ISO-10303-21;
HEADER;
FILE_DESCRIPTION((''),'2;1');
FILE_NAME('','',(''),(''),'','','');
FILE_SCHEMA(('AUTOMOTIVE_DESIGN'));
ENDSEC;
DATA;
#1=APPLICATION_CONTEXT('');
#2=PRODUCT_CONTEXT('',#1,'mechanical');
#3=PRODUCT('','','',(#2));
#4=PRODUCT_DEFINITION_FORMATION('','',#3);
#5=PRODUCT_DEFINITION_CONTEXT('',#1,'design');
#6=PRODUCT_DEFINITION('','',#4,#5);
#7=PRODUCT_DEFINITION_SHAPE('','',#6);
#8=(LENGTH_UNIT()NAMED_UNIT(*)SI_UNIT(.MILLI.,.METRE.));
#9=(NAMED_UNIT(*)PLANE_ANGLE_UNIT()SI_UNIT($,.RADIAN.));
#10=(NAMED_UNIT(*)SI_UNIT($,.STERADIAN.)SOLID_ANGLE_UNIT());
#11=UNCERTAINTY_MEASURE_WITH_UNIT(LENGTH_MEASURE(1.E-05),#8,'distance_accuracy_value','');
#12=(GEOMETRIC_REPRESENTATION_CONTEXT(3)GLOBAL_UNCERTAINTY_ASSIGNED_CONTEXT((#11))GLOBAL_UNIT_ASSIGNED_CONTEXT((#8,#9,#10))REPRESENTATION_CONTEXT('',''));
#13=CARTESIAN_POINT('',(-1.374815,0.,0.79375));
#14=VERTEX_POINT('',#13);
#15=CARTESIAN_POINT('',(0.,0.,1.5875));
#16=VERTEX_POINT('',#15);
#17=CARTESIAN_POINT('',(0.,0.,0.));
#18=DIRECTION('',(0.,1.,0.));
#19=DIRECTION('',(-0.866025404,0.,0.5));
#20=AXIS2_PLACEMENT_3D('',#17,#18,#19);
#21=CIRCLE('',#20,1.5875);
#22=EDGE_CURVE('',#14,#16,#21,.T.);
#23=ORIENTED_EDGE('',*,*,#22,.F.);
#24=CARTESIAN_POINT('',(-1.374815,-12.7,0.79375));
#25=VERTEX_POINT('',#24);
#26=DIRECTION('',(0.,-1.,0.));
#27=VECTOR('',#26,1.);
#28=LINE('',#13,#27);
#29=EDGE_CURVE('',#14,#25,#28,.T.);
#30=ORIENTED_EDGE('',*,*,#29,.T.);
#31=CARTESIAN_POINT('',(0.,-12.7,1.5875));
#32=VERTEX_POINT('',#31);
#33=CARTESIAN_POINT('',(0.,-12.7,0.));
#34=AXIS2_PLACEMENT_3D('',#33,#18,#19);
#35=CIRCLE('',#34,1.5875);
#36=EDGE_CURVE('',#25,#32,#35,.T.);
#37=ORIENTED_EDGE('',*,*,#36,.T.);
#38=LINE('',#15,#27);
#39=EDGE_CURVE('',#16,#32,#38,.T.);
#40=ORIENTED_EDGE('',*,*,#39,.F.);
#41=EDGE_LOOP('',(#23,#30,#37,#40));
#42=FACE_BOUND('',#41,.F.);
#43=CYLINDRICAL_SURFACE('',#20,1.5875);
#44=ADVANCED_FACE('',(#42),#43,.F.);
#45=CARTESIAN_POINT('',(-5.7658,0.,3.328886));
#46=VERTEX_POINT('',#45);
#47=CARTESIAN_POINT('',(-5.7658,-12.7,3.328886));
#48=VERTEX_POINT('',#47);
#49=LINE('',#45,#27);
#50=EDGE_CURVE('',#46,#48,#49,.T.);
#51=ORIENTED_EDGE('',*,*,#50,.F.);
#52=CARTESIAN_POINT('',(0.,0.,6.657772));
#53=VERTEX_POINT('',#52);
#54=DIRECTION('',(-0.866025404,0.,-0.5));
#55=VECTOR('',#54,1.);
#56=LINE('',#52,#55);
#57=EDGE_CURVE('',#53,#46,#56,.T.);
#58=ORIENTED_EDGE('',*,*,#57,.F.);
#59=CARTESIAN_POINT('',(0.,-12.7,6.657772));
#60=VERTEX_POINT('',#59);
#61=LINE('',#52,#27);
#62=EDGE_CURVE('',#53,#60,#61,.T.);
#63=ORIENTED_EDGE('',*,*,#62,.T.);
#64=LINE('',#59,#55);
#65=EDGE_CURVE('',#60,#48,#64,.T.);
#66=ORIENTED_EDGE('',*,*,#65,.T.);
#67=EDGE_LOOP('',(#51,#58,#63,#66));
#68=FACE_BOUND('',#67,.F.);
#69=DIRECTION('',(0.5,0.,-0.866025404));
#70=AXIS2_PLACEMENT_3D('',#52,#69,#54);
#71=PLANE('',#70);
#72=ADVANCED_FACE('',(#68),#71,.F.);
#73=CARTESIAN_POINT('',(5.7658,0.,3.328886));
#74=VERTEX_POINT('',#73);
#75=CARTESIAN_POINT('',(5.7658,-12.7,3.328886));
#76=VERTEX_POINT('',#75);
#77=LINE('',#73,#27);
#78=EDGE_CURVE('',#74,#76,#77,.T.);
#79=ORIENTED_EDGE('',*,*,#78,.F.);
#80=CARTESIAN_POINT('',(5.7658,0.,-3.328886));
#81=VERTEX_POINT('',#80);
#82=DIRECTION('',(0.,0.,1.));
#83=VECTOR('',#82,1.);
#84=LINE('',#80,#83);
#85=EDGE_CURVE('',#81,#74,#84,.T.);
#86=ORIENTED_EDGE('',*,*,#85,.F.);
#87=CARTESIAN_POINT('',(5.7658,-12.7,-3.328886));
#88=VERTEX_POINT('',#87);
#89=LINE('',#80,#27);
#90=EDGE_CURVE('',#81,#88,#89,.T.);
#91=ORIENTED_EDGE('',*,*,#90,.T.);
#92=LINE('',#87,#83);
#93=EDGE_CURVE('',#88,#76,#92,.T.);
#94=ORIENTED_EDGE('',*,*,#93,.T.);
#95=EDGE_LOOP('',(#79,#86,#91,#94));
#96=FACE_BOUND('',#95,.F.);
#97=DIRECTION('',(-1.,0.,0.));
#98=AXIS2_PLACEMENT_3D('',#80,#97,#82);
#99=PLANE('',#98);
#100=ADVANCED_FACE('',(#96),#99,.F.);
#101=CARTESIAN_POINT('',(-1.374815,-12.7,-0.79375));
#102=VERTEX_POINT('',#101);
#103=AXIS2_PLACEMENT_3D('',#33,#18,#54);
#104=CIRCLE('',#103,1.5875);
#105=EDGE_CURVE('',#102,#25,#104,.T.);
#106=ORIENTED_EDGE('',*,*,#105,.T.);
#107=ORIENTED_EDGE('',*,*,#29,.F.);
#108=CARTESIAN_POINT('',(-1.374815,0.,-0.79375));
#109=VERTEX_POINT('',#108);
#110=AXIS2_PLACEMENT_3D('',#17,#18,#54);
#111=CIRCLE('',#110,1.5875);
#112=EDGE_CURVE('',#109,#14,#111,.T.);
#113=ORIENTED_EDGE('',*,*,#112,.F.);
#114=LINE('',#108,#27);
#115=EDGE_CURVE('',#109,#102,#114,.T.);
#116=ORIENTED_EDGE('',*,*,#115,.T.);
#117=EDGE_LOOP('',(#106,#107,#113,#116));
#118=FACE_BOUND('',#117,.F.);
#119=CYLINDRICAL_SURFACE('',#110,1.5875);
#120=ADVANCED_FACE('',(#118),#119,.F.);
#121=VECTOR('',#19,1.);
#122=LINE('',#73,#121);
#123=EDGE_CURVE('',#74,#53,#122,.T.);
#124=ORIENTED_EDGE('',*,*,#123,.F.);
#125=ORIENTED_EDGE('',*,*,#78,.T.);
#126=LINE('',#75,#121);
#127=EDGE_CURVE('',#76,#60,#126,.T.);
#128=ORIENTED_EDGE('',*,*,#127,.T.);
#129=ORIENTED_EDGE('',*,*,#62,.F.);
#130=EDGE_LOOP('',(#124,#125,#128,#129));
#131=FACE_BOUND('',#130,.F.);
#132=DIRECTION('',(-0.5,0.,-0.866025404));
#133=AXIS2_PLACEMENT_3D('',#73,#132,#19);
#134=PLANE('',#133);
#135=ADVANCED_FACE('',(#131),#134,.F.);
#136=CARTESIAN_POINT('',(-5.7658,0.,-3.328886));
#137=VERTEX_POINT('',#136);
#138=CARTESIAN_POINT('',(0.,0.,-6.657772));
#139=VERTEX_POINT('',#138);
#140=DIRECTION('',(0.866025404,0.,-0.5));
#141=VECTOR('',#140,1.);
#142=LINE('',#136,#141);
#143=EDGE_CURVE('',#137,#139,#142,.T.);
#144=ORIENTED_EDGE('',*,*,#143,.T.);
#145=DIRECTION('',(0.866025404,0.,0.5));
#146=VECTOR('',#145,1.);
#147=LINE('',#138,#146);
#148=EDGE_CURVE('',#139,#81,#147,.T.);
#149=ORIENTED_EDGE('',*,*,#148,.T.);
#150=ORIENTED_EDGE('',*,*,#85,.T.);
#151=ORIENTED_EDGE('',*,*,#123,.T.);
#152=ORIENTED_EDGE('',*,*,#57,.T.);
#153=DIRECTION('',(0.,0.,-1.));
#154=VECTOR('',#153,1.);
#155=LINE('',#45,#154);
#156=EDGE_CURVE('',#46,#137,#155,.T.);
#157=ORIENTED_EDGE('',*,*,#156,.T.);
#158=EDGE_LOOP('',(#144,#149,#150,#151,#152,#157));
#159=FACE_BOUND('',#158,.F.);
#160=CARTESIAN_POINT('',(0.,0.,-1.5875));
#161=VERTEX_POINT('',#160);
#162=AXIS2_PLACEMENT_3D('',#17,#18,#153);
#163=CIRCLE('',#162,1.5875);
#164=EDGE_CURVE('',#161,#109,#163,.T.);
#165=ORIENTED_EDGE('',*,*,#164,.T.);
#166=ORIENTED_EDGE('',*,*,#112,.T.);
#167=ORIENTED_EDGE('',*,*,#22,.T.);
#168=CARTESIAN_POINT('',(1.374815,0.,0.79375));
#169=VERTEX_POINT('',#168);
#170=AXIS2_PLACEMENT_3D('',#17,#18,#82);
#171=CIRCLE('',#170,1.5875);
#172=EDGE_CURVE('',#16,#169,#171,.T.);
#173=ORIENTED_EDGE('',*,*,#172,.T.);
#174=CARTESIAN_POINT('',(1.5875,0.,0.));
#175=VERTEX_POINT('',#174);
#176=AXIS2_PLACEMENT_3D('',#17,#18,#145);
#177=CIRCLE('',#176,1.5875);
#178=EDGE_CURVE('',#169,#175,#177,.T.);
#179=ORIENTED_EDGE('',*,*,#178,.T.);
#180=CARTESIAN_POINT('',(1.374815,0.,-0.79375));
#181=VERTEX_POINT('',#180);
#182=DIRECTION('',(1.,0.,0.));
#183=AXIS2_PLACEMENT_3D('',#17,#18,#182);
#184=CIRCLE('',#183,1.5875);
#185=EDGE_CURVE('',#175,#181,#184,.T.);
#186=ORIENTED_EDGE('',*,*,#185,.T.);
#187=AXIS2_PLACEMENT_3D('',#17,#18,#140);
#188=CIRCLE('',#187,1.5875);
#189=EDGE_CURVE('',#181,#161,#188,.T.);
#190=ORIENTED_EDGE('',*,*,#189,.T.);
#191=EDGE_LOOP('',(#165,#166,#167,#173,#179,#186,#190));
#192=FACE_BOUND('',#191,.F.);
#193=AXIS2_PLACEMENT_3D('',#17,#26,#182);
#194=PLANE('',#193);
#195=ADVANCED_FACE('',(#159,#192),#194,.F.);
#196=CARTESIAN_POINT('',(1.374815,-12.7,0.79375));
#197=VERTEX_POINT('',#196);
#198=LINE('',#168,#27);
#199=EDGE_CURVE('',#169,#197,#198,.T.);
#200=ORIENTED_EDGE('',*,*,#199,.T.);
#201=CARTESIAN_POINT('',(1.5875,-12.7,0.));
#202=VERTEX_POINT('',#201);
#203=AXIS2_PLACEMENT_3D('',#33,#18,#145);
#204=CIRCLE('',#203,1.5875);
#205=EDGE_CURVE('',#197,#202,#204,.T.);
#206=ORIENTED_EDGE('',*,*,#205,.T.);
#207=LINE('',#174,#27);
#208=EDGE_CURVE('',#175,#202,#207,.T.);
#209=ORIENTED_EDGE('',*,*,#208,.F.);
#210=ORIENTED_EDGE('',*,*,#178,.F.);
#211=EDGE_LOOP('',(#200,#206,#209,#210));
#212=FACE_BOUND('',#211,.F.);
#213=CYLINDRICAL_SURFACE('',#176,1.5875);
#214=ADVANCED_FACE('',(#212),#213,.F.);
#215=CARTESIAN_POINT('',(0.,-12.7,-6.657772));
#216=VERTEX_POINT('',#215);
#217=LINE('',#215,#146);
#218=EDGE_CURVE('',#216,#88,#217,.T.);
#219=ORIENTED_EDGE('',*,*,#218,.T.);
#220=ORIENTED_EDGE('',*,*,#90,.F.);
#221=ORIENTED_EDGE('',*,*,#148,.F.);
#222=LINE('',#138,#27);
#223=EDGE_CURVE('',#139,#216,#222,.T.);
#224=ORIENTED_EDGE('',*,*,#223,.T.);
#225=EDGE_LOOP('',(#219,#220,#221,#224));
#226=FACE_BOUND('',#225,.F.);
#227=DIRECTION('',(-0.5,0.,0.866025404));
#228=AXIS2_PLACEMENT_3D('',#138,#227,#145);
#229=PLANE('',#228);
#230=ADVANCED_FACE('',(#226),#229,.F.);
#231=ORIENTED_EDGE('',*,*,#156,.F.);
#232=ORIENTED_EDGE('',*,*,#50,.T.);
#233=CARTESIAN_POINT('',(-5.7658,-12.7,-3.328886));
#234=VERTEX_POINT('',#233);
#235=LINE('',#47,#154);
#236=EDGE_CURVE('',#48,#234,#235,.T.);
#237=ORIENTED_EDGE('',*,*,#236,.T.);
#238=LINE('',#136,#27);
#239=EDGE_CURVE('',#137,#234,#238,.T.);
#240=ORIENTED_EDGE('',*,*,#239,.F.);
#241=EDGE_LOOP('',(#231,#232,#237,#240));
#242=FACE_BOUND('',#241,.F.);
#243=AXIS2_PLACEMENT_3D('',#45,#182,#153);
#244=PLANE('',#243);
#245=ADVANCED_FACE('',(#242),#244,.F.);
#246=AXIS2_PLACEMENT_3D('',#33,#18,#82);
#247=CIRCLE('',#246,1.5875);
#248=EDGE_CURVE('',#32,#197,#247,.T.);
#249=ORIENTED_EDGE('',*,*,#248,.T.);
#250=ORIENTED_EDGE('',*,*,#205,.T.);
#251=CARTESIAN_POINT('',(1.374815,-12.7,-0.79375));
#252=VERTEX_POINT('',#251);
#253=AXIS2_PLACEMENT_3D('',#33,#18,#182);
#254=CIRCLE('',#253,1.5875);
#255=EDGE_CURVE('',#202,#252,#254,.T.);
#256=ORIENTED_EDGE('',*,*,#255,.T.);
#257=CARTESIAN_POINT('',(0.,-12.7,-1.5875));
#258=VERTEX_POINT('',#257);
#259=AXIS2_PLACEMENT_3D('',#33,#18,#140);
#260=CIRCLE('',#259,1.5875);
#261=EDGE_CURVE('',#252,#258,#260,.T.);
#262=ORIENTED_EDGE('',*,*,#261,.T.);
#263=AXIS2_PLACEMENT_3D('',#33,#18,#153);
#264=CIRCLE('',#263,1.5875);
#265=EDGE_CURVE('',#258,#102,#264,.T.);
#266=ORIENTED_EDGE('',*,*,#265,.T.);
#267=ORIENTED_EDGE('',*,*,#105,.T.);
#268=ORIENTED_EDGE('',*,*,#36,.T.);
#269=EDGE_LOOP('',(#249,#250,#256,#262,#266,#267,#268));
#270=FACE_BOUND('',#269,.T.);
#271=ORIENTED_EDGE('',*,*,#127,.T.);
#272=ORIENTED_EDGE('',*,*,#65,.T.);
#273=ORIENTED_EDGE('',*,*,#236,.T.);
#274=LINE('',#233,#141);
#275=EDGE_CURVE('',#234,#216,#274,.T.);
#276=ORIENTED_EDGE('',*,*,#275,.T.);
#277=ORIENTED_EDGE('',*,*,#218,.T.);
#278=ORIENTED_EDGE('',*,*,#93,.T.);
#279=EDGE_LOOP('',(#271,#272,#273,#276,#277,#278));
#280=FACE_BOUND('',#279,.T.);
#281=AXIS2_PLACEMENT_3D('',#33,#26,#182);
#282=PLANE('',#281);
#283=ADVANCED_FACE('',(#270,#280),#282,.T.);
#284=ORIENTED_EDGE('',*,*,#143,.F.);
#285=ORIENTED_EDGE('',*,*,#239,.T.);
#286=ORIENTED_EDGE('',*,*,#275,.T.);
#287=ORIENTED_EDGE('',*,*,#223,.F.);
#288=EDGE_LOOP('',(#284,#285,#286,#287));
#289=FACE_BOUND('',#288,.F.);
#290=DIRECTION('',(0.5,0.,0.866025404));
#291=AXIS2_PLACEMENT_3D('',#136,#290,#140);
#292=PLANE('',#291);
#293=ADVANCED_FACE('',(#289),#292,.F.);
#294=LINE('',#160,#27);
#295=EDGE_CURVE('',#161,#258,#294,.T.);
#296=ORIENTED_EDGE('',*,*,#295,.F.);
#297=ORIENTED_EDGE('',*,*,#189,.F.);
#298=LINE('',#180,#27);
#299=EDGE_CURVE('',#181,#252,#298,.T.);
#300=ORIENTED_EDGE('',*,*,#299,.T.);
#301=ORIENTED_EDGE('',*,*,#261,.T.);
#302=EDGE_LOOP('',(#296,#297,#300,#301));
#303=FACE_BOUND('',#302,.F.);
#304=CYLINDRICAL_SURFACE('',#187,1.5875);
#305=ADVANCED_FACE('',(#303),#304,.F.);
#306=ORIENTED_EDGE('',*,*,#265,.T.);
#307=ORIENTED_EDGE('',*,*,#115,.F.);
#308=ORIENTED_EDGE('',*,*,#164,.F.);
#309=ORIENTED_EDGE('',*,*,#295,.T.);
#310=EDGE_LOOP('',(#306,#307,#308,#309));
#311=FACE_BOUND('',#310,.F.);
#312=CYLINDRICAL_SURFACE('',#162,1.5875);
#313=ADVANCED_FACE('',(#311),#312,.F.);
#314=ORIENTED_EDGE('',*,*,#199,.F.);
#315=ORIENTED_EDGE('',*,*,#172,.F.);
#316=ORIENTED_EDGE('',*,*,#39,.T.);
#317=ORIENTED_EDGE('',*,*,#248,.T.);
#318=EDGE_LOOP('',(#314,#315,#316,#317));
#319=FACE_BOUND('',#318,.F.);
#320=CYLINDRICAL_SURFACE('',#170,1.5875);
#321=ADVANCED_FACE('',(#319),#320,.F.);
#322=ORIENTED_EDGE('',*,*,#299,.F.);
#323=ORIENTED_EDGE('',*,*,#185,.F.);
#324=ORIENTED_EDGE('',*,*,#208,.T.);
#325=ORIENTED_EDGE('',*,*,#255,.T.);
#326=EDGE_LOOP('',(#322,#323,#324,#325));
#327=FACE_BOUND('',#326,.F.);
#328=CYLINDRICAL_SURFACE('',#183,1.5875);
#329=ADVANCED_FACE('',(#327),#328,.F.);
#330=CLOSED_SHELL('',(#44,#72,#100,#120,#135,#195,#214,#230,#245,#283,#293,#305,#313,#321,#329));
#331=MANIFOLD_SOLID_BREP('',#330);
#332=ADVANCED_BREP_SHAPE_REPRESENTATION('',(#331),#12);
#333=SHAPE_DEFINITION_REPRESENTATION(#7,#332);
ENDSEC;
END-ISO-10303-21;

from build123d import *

# Parameters (mm, degrees)
F1_DEPTH = 12.7


# Not quite as in the source:
# - a feature names something its author has since deleted; it is built from what else it names


with BuildPart() as f1:
    # F0 (on Front) → F1 (new body)
    with BuildSketch(Plane.XZ):
        Polygon((5.7657995114, 3.3288859), (0, 6.6577718), (-5.7657995114, 3.3288859), (-5.7657995114, -3.3288859), (0, -6.6577718), (5.7657995114, -3.3288859), align=None)
        with BuildLine():
            ThreePointArc((-1.3748153285, 0.79375), (-0.79375, 1.3748153285), (0, 1.5875))
            ThreePointArc((0, 1.5875), (0.79375, 1.3748153285), (1.3748153285, 0.79375))
            ThreePointArc((1.3748153285, 0.79375), (1.5334072492, 0.4108752341), (1.5875, 0))
            ThreePointArc((1.5875, 0), (1.5334072492, -0.4108752341), (1.3748153285, -0.79375))
            ThreePointArc((1.3748153285, -0.79375), (0.79375, -1.3748153285), (0, -1.5875))
            ThreePointArc((0, -1.5875), (-0.79375, -1.3748153285), (-1.3748153285, -0.79375))
            ThreePointArc((-1.3748153285, -0.79375), (-1.5875, 0), (-1.3748153285, 0.79375))
        make_face(mode=Mode.SUBTRACT)
    extrude(amount=F1_DEPTH)


solid = f1.part
